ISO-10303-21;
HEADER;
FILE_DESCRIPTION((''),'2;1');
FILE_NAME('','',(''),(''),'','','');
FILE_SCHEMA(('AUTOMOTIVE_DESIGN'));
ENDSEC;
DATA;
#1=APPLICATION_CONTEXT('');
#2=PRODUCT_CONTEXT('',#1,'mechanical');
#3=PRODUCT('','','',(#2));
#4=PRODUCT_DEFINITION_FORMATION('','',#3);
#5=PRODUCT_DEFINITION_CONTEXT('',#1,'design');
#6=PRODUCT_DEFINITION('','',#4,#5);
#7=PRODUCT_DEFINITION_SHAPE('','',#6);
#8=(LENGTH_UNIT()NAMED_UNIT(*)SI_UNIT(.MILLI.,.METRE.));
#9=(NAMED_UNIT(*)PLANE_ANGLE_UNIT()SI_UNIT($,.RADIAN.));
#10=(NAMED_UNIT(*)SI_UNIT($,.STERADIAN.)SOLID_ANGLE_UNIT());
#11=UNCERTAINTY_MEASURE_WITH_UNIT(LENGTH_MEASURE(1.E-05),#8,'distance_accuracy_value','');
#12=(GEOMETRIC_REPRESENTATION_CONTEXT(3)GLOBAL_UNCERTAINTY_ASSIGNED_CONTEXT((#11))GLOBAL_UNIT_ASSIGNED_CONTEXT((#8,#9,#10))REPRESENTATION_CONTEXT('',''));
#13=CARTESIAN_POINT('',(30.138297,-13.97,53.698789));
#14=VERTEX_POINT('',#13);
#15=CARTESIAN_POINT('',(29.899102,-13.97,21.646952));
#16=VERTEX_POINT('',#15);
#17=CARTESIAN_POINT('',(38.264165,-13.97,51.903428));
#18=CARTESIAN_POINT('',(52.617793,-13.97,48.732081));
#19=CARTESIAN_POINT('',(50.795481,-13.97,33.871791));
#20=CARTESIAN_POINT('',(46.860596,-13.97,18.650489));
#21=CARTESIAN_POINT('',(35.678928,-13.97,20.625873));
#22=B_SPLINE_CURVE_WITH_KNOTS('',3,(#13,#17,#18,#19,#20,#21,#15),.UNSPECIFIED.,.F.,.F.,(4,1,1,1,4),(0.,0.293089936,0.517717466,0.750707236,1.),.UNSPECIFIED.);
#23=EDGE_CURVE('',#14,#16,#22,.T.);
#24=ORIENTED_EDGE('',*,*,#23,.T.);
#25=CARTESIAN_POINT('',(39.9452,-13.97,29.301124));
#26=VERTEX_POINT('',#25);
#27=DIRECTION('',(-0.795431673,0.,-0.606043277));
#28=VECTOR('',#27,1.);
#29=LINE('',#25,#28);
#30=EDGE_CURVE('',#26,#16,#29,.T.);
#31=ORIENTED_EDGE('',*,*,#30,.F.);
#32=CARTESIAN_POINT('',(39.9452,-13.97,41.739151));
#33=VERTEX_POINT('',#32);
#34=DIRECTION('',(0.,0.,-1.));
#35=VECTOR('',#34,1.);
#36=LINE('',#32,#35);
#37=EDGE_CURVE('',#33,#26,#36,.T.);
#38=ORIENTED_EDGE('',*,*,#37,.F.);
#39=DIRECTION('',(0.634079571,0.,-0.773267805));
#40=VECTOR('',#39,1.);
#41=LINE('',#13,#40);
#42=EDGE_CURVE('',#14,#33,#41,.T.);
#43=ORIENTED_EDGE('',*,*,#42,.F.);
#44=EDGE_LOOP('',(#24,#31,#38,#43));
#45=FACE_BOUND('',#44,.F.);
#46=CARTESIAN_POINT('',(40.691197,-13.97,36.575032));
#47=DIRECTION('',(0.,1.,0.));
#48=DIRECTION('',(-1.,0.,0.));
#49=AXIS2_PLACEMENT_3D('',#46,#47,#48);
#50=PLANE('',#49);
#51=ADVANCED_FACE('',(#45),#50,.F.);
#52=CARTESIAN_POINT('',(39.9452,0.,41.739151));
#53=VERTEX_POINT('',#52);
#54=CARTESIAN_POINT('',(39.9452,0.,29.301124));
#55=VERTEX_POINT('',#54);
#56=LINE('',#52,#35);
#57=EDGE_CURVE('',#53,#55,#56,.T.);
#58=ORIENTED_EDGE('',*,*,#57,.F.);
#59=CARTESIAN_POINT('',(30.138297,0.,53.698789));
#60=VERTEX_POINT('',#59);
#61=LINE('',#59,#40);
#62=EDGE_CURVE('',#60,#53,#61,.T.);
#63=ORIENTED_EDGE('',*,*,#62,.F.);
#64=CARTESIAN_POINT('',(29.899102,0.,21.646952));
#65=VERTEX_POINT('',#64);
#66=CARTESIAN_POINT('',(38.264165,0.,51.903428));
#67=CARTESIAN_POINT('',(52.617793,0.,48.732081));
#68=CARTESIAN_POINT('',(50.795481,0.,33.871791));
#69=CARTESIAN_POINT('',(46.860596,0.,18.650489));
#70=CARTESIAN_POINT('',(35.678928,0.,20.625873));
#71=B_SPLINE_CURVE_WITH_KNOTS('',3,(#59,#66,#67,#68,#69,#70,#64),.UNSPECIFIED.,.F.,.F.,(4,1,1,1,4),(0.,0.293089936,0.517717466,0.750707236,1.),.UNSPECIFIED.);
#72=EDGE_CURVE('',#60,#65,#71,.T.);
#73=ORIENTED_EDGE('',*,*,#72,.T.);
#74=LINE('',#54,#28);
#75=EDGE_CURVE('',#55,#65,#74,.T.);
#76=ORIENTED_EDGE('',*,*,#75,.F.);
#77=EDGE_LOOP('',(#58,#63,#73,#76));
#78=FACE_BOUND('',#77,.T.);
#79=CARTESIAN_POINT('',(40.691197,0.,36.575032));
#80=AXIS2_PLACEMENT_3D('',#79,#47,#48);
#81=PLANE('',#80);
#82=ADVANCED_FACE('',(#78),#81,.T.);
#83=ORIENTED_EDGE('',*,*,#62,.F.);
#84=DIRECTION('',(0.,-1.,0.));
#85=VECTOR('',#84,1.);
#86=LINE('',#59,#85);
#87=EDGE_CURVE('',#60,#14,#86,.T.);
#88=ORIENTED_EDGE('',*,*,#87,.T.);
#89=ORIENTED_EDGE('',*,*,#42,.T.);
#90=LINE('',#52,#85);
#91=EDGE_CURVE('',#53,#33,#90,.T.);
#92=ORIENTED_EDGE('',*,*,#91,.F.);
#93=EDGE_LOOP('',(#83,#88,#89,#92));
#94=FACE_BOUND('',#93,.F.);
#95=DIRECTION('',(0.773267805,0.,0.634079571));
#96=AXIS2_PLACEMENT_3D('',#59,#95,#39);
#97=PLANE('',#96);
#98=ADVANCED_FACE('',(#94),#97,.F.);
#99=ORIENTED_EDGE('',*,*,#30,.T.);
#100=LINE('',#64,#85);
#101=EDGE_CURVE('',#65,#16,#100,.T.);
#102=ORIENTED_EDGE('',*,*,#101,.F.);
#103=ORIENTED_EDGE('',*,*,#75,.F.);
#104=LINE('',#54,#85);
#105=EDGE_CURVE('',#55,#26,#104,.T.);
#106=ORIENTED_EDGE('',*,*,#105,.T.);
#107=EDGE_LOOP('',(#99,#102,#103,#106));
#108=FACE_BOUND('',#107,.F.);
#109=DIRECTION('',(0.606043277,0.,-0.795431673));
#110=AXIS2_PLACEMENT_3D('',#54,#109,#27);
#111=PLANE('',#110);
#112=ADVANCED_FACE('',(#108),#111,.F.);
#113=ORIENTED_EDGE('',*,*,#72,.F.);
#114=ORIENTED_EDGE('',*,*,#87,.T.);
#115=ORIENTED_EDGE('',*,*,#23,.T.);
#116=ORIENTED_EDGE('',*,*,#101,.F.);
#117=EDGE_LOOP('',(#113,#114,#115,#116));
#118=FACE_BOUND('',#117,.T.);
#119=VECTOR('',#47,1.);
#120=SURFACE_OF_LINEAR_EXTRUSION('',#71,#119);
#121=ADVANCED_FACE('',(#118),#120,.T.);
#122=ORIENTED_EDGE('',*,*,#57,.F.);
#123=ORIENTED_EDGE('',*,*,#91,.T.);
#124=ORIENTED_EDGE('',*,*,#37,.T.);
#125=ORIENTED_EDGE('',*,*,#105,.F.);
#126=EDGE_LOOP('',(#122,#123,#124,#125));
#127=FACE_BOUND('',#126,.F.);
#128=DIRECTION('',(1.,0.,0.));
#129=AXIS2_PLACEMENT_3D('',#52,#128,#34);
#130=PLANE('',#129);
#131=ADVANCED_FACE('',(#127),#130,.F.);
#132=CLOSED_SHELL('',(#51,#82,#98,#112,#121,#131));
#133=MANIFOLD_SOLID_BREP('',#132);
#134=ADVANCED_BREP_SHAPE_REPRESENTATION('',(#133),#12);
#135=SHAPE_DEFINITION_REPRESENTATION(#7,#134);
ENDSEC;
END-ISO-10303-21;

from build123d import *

# Parameters (mm, degrees)
F3_DEPTH = 13.97


# Not quite as in the source:
# - the program builds the solid bodies; features that only make, move or delete a surface that nothing else refers to are left out


with BuildPart() as f3:
    # F2 (on Front) → F3 (new body)
    with BuildSketch(Plane.XZ):
        with BuildLine():
            add(Edge.make_bspline(
                [(30.1382970065, 53.6987893283), (38.2641649903, 51.9034280628), (52.6177925395, 48.7320810789), (50.7954811422, 33.8717910312), (46.8605959622, 18.6504889659), (35.6789275104, 20.6258726517), (29.8991017044, 21.6469522566)],
                knots=[0, 0, 0, 0, 0.2930899362, 0.5177174662, 0.750707236, 1, 1, 1, 1], degree=3))
            Line((30.1382970065, 53.6987893283), (39.9452000856, 41.7391508818))
            Line((39.9452000856, 41.7391508818), (39.9452000856, 29.3011236936))
            Line((39.9452000856, 29.3011236936), (29.8991017044, 21.6469522566))
        make_face()
    extrude(amount=F3_DEPTH)


solid = f3.part
